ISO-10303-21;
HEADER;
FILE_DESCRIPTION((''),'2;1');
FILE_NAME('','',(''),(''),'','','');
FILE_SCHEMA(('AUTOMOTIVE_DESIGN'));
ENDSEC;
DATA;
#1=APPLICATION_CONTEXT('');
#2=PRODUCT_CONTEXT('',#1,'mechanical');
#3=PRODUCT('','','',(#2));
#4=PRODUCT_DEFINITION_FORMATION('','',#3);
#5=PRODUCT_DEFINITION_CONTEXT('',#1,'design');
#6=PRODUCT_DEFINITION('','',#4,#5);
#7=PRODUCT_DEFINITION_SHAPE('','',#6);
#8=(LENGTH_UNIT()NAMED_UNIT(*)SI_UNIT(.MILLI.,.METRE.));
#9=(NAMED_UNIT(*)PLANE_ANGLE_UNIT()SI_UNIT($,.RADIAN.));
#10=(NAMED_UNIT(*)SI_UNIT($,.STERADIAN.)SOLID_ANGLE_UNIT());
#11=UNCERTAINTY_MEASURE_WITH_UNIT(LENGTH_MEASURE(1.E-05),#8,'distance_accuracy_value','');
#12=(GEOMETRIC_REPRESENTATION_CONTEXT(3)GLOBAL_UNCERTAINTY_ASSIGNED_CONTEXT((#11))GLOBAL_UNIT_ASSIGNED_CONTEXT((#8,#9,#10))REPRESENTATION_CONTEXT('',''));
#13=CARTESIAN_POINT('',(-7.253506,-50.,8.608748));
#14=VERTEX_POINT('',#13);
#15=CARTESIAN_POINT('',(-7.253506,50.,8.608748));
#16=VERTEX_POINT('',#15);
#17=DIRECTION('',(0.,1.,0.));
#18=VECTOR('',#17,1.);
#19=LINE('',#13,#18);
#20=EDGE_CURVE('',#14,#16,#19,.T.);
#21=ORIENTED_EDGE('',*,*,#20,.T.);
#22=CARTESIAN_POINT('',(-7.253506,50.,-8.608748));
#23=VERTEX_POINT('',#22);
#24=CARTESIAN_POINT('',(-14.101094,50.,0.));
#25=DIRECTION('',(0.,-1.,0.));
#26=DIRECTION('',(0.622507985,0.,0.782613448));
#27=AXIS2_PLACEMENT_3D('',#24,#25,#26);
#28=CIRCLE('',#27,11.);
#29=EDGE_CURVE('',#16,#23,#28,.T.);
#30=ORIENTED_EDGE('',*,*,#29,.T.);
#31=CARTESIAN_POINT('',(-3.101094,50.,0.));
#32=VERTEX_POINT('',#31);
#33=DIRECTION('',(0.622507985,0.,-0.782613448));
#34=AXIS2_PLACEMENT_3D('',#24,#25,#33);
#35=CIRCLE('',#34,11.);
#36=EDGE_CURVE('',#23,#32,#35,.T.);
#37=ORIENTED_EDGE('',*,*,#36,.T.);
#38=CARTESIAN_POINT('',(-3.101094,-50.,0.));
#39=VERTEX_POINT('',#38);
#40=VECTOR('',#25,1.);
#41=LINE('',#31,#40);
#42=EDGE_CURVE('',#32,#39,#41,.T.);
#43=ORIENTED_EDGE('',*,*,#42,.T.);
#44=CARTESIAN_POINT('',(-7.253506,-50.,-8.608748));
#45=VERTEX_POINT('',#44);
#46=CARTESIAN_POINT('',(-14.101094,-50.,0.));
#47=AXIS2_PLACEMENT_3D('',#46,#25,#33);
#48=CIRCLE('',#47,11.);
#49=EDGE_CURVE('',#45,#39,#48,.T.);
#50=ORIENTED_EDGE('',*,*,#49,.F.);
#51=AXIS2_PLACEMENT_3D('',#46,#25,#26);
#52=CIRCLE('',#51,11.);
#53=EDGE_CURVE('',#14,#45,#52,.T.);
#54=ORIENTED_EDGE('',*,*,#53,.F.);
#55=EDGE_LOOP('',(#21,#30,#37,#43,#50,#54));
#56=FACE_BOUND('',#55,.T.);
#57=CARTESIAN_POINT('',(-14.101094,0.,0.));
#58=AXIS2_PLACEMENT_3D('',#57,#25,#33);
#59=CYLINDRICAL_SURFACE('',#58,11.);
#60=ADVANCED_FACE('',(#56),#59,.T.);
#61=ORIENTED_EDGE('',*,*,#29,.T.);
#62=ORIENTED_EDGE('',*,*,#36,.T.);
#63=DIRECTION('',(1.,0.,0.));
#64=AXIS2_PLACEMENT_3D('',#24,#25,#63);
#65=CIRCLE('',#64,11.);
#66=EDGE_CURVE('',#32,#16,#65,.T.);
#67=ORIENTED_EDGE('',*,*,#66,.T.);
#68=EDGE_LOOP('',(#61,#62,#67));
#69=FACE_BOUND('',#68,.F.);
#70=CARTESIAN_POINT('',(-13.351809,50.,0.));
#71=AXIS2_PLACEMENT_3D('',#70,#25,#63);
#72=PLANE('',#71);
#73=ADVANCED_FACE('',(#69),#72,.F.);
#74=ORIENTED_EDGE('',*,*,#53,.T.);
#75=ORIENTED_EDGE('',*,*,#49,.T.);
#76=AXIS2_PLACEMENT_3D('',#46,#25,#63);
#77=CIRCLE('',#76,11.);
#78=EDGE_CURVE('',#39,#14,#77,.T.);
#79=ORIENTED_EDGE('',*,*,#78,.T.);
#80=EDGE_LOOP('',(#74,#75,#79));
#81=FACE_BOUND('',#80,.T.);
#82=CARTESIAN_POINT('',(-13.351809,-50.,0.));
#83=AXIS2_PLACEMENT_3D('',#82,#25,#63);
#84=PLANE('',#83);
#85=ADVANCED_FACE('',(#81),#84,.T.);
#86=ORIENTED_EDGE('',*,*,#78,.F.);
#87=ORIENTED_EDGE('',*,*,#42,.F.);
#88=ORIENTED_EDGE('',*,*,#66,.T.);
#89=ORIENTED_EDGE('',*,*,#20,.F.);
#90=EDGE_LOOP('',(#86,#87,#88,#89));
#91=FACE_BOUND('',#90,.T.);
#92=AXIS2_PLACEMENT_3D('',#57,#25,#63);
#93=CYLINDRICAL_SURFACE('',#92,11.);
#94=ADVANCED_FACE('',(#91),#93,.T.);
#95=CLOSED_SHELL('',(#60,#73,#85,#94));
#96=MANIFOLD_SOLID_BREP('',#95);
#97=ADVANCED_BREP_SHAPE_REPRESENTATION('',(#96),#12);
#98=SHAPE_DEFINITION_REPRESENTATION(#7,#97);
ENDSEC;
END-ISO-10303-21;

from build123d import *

# Parameters (mm, degrees)
F1_DEPTH = 50


# Not quite as in the source:
# - a feature of the source that left no trace in its solid (it failed there, or was rolled back) is left out


with BuildPart() as f1:
    # F0 (on Front) → F1 (new body, symmetric)
    with BuildSketch(Plane.XZ):
        with BuildLine():
            ThreePointArc((-7.2535058055, -8.6087479297), (-4.1934333127, -4.7789399387), (-3.101093635, 0))
            ThreePointArc((-3.101093635, 0), (-4.1934333127, 4.7789399387), (-7.2535058055, 8.6087479297))
            ThreePointArc((-7.2535058055, 8.6087479297), (-25.101093635, 0), (-7.2535058055, -8.6087479297))
        make_face()
    extrude(amount=F1_DEPTH, both=True)


solid = f1.part
